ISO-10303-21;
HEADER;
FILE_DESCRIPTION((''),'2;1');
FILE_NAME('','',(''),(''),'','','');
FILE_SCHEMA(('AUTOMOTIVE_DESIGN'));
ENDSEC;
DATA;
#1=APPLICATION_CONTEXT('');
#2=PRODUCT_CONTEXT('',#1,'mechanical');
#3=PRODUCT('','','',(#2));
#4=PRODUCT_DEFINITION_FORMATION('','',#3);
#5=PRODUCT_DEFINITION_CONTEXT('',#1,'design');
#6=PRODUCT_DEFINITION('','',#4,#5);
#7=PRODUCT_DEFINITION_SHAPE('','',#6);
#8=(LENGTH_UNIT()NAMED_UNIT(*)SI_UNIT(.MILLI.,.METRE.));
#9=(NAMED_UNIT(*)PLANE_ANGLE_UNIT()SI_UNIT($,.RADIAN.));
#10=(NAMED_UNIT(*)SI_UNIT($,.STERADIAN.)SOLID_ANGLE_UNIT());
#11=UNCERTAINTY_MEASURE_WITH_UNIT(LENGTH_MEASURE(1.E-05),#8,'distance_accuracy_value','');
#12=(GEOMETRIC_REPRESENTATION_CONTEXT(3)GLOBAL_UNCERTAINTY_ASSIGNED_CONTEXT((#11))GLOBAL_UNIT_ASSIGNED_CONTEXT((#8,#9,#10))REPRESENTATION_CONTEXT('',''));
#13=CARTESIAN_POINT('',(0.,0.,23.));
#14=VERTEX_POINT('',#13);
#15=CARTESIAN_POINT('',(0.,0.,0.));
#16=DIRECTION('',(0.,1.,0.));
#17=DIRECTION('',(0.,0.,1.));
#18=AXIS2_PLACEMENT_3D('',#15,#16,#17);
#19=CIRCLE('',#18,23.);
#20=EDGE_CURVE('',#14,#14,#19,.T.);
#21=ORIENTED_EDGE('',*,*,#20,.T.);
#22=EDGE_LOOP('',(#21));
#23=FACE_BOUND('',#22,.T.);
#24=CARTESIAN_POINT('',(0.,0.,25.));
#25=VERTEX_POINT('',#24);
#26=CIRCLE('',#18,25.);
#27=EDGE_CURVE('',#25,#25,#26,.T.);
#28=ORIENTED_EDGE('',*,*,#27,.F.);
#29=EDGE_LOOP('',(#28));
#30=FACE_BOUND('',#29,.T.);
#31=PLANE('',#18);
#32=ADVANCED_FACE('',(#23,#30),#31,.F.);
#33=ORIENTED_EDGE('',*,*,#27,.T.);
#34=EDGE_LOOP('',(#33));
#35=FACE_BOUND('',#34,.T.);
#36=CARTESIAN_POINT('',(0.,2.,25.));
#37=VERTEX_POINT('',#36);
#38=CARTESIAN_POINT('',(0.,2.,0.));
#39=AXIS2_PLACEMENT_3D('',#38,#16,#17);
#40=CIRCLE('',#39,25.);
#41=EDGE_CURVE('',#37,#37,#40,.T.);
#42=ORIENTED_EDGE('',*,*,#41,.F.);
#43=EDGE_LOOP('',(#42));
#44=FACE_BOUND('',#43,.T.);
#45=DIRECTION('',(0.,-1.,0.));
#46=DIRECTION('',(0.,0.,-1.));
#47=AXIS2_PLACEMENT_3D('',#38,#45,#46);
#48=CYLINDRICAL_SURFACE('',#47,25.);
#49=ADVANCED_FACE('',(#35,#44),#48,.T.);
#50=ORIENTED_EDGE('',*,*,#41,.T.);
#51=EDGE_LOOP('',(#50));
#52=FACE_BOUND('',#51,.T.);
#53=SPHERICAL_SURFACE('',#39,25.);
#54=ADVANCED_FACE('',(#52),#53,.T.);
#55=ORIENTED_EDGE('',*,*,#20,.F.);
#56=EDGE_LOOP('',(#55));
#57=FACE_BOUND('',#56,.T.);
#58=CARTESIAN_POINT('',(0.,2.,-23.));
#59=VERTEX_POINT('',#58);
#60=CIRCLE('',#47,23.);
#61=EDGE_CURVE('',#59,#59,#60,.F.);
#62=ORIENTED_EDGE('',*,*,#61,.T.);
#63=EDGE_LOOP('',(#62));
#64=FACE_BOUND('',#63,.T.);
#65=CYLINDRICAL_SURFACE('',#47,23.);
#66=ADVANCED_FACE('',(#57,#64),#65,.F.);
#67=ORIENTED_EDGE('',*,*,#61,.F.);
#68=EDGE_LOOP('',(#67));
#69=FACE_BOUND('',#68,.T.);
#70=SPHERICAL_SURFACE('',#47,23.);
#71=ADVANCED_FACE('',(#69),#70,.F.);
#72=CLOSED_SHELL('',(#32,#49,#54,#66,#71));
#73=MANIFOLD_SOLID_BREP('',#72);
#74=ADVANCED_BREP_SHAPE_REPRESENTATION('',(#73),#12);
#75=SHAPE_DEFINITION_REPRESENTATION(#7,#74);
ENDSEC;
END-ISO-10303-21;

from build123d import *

# Parameters (mm, degrees)
SKETCH1_R           = 25
BOSS_EXTRUDE1_DEPTH = 2
DOME1_FACE_RADIUS   = 25
DOME1_HEIGHT        = 25


# Read off the part's stored shape, not the designer's step: Shell1
with BuildPart() as part:
    # Sketch1 → Boss-Extrude1 (new body)
    with BuildSketch(Plane(origin=(0, 0, 0), x_dir=(1, 0, 0), z_dir=(0, 1, 0))):
        with Locations(Location((0, 0, 0), (0, 0, 270))):
            Circle(SKETCH1_R)
    extrude(amount=BOSS_EXTRUDE1_DEPTH)

    # Dome1: a dome of height H over a round flat face of radius A is a cap of a sphere of radius (A * A + H * H) / (2 * H)
    dome1_r = (DOME1_FACE_RADIUS * DOME1_FACE_RADIUS + DOME1_HEIGHT * DOME1_HEIGHT) / (2 * DOME1_HEIGHT)
    dome1_base = Plane((0, 2, 0), z_dir=(0, 1, 0))
    with Locations(dome1_base.offset(DOME1_HEIGHT - dome1_r)):
        dome1_ball = Sphere(dome1_r, mode=Mode.PRIVATE)
    add(split(dome1_ball, bisect_by=dome1_base, keep=Keep.TOP, mode=Mode.PRIVATE))

    # Shell1 outline → Shell1 (revolve, cut)
    with BuildSketch(Plane.XY):
        with BuildLine():
            Line((23, 0), (23, 1.999999977))
            ThreePointArc((23, 1.999999977), (16.263455975, 18.263455959), (0, 25))
            Line((0, 25), (0, 0))
            Line((0, 0), (23, 0))
        make_face()
    revolve(axis=Axis((0, 0, 0), (0, 1, 0)), mode=Mode.SUBTRACT)


solid = part.part
